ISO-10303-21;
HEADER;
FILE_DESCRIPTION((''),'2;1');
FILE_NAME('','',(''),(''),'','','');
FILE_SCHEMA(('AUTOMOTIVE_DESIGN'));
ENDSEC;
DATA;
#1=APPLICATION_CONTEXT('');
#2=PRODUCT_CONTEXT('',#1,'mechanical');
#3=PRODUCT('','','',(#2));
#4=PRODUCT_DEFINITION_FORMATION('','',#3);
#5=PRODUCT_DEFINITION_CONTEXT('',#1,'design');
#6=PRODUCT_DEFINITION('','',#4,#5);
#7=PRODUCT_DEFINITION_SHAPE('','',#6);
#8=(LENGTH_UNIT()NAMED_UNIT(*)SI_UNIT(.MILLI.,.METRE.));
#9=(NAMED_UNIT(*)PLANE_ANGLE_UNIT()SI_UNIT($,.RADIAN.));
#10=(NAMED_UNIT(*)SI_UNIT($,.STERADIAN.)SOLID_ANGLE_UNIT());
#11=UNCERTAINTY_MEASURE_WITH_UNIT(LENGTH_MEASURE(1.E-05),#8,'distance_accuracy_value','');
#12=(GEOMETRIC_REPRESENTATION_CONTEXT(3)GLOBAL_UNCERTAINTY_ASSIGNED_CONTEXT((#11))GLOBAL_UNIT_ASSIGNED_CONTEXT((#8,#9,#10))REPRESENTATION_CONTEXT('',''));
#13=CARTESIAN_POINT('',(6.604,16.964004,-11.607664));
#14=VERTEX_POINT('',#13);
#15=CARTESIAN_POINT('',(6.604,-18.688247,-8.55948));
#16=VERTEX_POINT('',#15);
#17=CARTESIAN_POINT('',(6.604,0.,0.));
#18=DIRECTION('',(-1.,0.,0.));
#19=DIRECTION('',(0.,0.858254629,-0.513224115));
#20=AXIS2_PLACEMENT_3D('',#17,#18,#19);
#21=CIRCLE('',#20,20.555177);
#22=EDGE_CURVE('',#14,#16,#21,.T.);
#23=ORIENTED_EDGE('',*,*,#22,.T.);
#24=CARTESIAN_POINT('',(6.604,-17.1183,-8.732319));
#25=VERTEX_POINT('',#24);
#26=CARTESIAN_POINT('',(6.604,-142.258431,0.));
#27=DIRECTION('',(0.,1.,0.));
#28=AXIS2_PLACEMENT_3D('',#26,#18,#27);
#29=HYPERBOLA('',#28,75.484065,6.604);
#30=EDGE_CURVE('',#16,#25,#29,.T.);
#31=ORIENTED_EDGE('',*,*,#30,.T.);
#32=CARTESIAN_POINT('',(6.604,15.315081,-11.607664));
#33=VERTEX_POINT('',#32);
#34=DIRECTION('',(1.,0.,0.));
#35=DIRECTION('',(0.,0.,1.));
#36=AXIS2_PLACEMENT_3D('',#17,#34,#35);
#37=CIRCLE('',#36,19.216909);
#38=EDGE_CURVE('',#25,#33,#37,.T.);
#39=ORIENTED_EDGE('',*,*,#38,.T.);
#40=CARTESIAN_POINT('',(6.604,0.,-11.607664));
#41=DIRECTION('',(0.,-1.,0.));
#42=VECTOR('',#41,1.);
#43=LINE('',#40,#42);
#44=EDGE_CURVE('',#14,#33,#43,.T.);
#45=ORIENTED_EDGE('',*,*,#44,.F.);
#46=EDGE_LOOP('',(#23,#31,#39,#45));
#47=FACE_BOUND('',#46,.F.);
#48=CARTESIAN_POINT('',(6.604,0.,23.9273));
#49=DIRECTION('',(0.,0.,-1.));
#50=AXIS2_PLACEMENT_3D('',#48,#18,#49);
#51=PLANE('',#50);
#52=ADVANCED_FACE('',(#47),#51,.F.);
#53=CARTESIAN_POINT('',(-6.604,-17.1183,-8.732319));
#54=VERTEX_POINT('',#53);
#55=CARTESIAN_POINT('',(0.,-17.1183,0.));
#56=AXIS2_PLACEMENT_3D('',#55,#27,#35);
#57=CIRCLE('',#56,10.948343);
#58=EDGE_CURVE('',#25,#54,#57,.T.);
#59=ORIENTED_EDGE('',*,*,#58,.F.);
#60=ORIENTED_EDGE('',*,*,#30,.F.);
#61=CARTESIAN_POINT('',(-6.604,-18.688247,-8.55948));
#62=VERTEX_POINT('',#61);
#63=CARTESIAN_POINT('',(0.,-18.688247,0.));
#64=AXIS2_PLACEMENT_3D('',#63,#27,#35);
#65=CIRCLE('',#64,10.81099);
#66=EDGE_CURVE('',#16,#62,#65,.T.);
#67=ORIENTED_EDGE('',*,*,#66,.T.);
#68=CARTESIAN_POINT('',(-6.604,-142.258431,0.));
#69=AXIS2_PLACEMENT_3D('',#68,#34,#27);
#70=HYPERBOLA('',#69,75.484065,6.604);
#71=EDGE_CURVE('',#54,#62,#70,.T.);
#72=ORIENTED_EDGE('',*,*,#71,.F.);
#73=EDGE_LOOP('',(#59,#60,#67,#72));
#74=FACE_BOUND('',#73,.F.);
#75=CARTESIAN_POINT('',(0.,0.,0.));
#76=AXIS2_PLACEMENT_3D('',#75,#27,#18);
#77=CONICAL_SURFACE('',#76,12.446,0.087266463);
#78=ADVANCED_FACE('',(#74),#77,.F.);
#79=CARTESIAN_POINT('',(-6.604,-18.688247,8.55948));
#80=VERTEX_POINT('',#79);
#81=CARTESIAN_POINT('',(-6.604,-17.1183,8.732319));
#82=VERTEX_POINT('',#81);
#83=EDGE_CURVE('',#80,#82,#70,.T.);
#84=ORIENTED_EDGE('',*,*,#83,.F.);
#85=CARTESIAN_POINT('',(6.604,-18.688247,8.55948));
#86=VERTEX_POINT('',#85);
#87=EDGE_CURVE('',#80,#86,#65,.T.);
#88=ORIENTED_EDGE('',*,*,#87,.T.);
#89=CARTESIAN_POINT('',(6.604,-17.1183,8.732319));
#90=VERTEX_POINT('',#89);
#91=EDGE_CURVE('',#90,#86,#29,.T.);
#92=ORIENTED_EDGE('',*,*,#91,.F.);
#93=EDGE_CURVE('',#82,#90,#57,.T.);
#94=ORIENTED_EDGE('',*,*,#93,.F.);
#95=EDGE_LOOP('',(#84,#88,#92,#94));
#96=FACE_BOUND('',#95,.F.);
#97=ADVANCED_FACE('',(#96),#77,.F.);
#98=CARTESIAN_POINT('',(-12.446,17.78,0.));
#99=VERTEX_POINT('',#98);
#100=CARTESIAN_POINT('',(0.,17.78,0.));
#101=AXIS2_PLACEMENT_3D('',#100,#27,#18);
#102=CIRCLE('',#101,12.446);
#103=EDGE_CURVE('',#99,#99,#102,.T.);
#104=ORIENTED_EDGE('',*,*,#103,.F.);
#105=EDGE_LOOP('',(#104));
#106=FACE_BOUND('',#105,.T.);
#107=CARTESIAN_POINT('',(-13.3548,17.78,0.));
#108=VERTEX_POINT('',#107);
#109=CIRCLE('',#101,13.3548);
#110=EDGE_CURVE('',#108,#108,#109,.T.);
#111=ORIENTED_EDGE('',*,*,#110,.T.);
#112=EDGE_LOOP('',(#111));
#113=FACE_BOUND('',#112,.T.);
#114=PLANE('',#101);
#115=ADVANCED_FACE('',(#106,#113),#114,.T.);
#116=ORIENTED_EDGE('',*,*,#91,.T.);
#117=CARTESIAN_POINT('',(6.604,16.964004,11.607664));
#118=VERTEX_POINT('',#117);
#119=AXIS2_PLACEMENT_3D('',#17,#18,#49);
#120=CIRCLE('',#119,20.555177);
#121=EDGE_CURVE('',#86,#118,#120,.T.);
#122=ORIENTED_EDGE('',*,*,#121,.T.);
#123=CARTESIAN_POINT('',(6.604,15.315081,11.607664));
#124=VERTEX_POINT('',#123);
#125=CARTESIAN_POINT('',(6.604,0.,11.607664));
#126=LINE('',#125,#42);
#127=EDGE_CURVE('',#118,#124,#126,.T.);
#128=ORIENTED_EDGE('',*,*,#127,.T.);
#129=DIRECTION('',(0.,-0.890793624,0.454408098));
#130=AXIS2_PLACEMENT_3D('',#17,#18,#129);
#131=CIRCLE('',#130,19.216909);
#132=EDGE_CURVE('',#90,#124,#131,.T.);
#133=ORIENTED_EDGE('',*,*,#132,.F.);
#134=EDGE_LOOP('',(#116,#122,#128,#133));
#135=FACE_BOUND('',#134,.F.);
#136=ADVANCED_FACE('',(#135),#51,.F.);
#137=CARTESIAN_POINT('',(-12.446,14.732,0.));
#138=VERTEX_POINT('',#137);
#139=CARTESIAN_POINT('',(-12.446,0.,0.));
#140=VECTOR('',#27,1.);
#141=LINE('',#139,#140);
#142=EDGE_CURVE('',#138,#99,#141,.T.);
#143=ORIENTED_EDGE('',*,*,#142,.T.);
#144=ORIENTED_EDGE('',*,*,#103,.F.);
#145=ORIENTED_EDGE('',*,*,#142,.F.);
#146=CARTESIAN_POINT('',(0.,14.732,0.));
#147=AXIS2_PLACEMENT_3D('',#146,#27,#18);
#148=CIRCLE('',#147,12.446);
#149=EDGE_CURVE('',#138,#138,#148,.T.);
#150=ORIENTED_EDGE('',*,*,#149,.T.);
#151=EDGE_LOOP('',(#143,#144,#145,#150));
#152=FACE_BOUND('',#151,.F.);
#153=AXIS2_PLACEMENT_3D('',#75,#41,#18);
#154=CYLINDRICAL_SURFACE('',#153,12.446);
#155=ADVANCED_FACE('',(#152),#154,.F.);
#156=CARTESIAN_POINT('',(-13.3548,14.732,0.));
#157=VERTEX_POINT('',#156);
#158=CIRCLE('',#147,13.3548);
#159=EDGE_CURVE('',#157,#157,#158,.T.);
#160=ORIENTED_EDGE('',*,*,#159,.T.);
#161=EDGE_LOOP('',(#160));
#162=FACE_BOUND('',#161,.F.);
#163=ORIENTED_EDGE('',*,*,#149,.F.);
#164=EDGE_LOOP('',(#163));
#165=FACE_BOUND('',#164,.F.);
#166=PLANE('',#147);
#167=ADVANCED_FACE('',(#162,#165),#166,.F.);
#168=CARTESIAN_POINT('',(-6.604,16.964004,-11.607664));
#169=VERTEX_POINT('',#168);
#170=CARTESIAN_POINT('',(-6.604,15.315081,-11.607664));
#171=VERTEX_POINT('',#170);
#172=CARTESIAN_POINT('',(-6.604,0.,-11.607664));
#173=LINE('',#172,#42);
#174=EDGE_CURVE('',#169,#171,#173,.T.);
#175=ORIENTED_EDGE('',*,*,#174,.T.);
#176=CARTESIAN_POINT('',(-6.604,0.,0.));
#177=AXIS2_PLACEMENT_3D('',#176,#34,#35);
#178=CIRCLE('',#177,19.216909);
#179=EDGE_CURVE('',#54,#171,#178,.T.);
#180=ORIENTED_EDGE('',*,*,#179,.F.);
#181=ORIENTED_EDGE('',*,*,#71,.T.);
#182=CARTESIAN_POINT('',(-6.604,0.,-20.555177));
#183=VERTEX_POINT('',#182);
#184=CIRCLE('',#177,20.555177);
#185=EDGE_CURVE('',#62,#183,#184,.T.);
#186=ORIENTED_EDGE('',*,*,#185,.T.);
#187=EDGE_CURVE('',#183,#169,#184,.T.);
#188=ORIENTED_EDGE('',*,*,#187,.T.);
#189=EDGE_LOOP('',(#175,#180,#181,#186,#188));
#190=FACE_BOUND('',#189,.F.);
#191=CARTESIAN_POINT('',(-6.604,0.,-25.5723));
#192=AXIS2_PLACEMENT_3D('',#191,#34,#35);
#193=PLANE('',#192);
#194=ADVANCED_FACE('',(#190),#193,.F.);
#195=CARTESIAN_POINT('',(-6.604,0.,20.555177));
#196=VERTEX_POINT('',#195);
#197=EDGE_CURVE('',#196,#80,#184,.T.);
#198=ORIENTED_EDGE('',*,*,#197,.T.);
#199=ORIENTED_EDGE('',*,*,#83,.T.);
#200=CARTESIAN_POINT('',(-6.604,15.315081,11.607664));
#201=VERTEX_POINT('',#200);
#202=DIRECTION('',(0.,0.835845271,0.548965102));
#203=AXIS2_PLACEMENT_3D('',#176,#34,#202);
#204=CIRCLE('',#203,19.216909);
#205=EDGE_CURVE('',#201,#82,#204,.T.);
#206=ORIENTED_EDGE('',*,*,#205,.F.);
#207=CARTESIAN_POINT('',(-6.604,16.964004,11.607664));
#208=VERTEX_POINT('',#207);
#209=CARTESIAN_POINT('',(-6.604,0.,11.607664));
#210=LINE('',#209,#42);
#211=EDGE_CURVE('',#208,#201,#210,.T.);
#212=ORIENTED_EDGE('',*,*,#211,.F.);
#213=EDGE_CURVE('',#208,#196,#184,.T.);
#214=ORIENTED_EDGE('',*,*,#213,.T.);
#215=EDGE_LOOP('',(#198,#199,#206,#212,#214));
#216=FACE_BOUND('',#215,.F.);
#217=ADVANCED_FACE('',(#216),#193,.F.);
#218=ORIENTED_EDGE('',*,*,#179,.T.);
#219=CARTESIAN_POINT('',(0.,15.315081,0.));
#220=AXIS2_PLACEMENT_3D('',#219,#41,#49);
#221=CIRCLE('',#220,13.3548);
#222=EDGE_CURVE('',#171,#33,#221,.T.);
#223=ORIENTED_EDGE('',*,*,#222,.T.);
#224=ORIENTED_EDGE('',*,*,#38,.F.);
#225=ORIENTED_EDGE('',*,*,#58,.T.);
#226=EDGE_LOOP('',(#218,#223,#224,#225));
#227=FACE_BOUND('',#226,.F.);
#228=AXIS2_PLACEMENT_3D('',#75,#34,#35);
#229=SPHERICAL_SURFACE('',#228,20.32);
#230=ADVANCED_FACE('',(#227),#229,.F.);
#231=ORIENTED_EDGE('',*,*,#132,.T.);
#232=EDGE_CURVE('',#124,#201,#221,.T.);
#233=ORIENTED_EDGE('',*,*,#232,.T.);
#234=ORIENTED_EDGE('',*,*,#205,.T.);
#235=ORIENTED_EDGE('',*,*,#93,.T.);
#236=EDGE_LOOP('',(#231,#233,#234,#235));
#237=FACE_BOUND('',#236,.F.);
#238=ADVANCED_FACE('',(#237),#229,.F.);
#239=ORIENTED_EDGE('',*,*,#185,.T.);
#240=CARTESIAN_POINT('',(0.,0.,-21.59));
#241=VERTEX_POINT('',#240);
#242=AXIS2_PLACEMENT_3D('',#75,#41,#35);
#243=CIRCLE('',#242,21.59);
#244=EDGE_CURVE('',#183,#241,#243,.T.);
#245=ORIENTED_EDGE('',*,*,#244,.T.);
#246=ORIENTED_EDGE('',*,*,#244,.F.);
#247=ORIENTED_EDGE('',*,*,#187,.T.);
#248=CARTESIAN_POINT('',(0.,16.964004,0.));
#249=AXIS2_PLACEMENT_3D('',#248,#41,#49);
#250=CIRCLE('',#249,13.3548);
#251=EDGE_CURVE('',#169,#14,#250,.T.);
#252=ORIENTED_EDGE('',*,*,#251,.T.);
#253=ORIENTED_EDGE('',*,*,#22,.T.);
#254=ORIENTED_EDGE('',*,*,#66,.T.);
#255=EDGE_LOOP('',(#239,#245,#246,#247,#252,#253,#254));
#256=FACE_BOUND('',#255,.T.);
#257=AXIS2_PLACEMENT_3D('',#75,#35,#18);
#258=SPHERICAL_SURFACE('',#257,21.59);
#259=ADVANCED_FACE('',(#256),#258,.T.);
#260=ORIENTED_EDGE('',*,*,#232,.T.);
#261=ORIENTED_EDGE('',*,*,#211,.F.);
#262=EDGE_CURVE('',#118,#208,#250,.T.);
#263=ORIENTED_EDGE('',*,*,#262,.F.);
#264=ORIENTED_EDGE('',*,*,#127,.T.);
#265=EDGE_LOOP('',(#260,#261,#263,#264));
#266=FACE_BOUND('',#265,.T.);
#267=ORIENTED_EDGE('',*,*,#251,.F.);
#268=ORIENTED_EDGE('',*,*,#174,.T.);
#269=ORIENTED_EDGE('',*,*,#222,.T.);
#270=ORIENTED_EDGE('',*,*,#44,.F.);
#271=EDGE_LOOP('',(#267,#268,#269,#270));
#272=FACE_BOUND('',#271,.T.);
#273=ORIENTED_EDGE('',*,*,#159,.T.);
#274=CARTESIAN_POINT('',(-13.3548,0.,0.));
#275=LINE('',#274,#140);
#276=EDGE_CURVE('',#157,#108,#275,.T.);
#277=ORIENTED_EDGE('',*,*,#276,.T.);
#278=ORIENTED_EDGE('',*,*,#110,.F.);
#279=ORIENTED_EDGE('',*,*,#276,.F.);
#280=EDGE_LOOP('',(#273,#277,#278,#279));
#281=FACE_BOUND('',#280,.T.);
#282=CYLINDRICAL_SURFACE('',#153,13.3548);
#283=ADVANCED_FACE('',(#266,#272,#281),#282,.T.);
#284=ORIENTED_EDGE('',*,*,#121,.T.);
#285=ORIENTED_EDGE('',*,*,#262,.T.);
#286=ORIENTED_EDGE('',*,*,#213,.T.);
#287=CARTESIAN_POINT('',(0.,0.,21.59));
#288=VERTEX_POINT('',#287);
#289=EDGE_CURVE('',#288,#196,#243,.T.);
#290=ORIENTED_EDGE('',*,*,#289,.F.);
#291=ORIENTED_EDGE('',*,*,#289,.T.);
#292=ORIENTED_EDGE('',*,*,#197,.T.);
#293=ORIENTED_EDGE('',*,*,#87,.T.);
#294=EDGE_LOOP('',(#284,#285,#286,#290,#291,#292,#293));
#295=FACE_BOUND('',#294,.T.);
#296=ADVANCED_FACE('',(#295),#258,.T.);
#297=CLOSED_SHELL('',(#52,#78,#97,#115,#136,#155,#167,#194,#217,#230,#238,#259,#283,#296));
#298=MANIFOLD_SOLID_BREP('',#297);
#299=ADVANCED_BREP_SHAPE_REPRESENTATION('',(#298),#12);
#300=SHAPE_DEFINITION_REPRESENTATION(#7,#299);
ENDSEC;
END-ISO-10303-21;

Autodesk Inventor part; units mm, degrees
ref_plane "XY Plane" through (0, 0, 0) normal (0, 0, 1) x (1, 0, 0)
sketch "Sketch1" plane through (0, 0, 0) normal (0, 1, 0) x (-1, 0, 0)
  circle A0 centre (0, 0) radius 21.59
  line L0 (0, -21.59) -> (0, 21.59)
  dimension "d0" = 43.18
revolve "Revolution1" add sketch "Sketch1" angle 360 about axis through (0, 0, -21.59) along (0, 0, 1)
sketch "Sketch2" plane through (0, 0, 0) normal (0, 1, 0) x (-1, 0, 0)
  line L0 (-6.604, -23.7777) -> (-21.7081, -23.7777)
  line L1 (-21.7081, -23.7777) -> (-21.7081, 23.9273)
  line L2 (-21.7081, 23.9273) -> (-6.604, 23.9273)
  line L3 (-6.604, 23.9273) -> (-6.604, -23.7777)
  line L4 (6.604, 26.32) -> (23.3531, 26.32)
  line L5 (23.3531, 26.32) -> (23.3531, -25.5723)
  line L6 (23.3531, -25.5723) -> (6.604, -25.5723)
  line L7 (6.604, -25.5723) -> (6.604, 26.32)
  point P0 (0, 0)
  dimension "d2" = 6.604
  dimension "d3" = 6.604
extrude "Extrusion1" cut sketch "Sketch2" along normal mid plane 50.8
sketch "Sketch3" plane through (0, 0, 0) normal (0, 1, 0) x (-1, 0, 0)
  circle A0 centre (0, 0) radius 12.446
  dimension "d6" = 24.892
extrude "Extrusion2" cut sketch "Sketch3" along normal blind 47.625 and the other way blind 22.2377 draft -5
sketch "Sketch4" plane through (0, 0, 0) normal (0, 1, 0) x (-1, 0, 0)
  circle A0 centre (0, 0) radius 20.32
  line L0 (20.32, 0) -> (-20.32, 0)
  dimension "d11" = 40.64
revolve "Revolution2" cut sketch "Sketch4" angle 360 about axis through (-20.32, 0, 0) along (1, 0, 0)
sketch "Sketch5" plane through (0, 0, 0) normal (0, 1, 0) x (-1, 0, 0)
  circle A0 centre (0, 0) radius 13.3548
  circle A1 centre (0, 0) radius 12.446
extrude "Extrusion3" add sketch "Sketch5" along normal blind 17.78
sketch "Sketch6" plane through (0, 0, 0) normal (0, 1, 0) x (-1, 0, 0)
  circle A0 centre (0, 0) radius 12.446
  circle A1 centre (0, 0) radius 12.446 projected
  circle A2 centre (0, 0) radius 13.3548
extrude "Extrusion4" cut sketch "Sketch6" along normal blind 14.732
properties part number "mid_panel"
